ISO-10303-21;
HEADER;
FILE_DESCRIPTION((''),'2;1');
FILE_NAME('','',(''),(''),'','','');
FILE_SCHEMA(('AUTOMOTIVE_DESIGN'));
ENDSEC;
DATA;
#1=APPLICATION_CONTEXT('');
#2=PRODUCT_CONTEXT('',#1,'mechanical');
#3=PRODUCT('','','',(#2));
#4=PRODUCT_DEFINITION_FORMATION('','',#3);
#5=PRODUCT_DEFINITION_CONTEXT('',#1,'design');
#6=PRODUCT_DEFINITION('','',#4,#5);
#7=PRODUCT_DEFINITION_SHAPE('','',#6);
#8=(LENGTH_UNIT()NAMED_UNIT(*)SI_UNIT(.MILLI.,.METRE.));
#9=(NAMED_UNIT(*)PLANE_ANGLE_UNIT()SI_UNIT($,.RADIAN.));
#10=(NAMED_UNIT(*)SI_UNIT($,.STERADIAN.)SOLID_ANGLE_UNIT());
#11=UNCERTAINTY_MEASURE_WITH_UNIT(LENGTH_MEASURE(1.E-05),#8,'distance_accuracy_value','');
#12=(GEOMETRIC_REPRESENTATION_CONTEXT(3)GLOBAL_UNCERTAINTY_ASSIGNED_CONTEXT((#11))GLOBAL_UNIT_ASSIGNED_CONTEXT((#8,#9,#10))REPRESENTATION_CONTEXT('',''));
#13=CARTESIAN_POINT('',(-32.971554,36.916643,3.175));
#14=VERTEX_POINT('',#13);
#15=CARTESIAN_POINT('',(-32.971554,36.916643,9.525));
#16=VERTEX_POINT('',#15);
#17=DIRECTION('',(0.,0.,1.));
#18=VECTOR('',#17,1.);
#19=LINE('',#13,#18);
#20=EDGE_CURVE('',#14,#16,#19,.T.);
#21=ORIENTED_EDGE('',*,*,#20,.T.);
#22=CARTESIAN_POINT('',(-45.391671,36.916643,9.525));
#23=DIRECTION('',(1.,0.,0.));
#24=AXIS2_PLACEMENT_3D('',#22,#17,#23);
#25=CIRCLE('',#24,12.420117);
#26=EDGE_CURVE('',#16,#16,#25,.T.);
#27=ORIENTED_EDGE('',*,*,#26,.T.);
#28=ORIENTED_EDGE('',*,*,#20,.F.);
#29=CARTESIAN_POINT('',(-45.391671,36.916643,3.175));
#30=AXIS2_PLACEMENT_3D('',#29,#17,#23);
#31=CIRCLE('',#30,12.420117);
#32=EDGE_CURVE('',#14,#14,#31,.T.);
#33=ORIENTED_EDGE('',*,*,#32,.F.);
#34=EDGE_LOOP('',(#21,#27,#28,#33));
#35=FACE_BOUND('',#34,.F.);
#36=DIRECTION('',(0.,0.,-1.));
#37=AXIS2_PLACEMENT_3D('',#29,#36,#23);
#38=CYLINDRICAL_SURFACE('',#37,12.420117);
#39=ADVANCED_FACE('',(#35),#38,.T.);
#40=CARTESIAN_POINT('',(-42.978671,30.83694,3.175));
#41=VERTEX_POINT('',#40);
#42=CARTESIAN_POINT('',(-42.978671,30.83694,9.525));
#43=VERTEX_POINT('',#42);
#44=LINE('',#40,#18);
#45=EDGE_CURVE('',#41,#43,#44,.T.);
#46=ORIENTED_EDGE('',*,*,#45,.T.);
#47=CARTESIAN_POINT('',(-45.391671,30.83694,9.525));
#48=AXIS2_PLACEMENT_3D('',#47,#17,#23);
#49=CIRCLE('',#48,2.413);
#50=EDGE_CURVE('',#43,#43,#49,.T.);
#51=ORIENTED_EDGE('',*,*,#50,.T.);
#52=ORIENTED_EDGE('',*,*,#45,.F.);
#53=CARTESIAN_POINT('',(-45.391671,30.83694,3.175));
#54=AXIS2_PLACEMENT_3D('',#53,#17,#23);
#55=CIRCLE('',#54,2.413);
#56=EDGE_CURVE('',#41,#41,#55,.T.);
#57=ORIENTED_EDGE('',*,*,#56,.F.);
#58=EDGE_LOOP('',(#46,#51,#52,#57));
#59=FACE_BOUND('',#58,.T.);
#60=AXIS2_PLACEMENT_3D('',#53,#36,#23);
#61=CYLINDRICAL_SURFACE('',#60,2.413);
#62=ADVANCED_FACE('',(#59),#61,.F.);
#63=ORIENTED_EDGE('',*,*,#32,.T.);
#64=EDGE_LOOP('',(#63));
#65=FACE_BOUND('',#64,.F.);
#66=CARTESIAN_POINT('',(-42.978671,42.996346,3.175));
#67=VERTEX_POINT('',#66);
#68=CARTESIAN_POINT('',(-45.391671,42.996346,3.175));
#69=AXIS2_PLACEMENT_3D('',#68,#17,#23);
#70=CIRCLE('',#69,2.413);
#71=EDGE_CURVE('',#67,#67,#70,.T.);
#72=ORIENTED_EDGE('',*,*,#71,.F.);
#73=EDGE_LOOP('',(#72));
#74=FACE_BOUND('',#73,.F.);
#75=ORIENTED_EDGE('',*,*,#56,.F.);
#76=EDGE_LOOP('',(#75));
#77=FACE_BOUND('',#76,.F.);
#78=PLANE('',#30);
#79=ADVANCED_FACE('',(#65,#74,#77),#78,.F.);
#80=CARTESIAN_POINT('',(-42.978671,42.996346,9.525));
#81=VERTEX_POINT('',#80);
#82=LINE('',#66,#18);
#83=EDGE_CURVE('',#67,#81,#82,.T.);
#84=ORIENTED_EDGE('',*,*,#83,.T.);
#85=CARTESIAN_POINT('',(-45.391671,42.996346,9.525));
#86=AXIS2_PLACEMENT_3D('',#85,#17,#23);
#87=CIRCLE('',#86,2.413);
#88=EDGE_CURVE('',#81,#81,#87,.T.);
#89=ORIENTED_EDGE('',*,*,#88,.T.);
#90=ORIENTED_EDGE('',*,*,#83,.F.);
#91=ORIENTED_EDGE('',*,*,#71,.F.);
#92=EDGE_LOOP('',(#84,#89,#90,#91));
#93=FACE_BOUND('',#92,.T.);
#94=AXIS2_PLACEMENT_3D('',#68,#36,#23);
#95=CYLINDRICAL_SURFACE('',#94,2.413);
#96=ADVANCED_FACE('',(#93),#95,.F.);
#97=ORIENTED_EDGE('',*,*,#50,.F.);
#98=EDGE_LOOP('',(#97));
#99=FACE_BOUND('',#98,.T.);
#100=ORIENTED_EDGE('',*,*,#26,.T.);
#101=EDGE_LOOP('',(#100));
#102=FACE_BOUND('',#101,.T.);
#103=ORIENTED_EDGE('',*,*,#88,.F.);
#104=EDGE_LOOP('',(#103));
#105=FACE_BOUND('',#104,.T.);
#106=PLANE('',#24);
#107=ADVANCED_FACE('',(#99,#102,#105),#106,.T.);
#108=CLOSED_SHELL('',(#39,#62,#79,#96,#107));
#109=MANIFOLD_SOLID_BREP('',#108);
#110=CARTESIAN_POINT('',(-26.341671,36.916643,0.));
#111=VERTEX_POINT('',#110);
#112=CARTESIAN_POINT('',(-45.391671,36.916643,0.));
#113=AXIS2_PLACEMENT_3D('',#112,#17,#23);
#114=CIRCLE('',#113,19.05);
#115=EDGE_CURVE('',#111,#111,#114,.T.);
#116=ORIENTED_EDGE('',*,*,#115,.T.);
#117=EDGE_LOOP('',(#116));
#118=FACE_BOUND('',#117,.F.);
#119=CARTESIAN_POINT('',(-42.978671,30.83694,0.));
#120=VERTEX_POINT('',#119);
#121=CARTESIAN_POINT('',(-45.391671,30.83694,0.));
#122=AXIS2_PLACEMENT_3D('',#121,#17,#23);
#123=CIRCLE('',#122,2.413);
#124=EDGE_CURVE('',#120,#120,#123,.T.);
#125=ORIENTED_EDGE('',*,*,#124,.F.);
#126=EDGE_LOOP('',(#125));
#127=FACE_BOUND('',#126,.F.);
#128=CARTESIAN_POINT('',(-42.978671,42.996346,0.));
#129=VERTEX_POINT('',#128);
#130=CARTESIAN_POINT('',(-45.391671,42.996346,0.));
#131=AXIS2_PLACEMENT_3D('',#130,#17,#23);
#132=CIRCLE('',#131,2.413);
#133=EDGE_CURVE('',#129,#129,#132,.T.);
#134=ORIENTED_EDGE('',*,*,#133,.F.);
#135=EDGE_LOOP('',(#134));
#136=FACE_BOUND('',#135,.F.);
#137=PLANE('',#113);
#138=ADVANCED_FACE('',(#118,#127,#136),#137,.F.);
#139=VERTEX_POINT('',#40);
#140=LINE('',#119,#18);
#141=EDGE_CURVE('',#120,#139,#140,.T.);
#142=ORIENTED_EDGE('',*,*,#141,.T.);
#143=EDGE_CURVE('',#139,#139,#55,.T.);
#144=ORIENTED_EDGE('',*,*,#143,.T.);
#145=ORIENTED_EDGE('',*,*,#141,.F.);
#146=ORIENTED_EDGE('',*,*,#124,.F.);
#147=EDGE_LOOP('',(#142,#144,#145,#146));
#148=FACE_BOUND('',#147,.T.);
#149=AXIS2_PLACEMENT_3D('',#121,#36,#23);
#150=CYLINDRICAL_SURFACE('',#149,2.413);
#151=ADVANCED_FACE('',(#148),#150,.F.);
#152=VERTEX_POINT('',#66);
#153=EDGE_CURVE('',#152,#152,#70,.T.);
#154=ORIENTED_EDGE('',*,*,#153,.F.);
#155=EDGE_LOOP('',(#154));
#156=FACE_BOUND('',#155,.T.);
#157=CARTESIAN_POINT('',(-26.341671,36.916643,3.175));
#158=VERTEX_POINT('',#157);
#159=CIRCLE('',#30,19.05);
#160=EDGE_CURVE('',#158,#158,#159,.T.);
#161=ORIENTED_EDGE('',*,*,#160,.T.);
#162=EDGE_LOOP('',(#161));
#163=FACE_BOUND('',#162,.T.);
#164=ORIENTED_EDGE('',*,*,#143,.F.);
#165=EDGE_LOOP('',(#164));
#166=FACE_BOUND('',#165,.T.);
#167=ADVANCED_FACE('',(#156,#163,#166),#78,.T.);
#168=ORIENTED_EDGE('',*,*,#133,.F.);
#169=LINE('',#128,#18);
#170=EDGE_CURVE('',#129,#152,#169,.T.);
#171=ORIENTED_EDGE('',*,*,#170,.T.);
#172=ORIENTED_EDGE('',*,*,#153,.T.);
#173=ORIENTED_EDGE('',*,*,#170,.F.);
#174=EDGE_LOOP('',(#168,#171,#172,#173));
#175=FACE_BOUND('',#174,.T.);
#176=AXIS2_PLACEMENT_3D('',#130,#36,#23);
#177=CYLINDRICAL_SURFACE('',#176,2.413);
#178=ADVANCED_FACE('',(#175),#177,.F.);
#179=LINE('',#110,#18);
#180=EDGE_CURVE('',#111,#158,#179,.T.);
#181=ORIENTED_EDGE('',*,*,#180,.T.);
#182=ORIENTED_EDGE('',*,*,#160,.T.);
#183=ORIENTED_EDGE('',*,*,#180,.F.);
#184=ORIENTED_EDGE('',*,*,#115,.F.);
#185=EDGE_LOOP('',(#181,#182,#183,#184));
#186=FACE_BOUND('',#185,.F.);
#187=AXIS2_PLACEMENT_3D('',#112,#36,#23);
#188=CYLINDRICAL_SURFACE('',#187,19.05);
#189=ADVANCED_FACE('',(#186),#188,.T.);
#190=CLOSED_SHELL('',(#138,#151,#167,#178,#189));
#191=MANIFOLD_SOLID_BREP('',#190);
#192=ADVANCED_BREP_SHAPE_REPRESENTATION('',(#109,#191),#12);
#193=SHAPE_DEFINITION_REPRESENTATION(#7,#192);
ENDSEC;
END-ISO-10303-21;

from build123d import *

# Parameters (mm, degrees)
F1_R     = 19.05
F1_R_2   = 2.413
F2_DEPTH = 3.175
F3_R     = 12.4201168804
F3_R_2   = 2.413
F4_DEPTH = 6.35


# Not quite as in the source:
# - a length typed as a fraction of an inch, garbled in the dataset ("3 / 203.2 mm" for 3/8 in), is restored


with BuildPart() as f2:
    # F1 (on Top) → F2 (new body)
    with BuildSketch(Plane.XY):
        with Locations((-45.3916713595, 36.9166433811)):
            Circle(F1_R)
        with Locations((-45.3916713595, 30.8369403438)):
            Circle(F1_R_2, mode=Mode.SUBTRACT)
        with Locations((-45.3916713595, 42.9963464184)):
            Circle(F1_R_2, mode=Mode.SUBTRACT)
    extrude(amount=F2_DEPTH)


with BuildPart() as f4:
    # F3 (on face) → F4 (new body)
    with BuildSketch(Plane.XY.offset(3.175)):
        with Locations((-45.3916713595, 36.9166433811)):
            Circle(F3_R)
        with Locations((-45.3916713595, 30.8369403438)):
            Circle(F3_R_2, mode=Mode.SUBTRACT)
        with Locations((-45.3916713595, 42.9963464184)):
            Circle(F3_R_2, mode=Mode.SUBTRACT)
    extrude(amount=F4_DEPTH)


solid = Compound([f2.part, f4.part])
